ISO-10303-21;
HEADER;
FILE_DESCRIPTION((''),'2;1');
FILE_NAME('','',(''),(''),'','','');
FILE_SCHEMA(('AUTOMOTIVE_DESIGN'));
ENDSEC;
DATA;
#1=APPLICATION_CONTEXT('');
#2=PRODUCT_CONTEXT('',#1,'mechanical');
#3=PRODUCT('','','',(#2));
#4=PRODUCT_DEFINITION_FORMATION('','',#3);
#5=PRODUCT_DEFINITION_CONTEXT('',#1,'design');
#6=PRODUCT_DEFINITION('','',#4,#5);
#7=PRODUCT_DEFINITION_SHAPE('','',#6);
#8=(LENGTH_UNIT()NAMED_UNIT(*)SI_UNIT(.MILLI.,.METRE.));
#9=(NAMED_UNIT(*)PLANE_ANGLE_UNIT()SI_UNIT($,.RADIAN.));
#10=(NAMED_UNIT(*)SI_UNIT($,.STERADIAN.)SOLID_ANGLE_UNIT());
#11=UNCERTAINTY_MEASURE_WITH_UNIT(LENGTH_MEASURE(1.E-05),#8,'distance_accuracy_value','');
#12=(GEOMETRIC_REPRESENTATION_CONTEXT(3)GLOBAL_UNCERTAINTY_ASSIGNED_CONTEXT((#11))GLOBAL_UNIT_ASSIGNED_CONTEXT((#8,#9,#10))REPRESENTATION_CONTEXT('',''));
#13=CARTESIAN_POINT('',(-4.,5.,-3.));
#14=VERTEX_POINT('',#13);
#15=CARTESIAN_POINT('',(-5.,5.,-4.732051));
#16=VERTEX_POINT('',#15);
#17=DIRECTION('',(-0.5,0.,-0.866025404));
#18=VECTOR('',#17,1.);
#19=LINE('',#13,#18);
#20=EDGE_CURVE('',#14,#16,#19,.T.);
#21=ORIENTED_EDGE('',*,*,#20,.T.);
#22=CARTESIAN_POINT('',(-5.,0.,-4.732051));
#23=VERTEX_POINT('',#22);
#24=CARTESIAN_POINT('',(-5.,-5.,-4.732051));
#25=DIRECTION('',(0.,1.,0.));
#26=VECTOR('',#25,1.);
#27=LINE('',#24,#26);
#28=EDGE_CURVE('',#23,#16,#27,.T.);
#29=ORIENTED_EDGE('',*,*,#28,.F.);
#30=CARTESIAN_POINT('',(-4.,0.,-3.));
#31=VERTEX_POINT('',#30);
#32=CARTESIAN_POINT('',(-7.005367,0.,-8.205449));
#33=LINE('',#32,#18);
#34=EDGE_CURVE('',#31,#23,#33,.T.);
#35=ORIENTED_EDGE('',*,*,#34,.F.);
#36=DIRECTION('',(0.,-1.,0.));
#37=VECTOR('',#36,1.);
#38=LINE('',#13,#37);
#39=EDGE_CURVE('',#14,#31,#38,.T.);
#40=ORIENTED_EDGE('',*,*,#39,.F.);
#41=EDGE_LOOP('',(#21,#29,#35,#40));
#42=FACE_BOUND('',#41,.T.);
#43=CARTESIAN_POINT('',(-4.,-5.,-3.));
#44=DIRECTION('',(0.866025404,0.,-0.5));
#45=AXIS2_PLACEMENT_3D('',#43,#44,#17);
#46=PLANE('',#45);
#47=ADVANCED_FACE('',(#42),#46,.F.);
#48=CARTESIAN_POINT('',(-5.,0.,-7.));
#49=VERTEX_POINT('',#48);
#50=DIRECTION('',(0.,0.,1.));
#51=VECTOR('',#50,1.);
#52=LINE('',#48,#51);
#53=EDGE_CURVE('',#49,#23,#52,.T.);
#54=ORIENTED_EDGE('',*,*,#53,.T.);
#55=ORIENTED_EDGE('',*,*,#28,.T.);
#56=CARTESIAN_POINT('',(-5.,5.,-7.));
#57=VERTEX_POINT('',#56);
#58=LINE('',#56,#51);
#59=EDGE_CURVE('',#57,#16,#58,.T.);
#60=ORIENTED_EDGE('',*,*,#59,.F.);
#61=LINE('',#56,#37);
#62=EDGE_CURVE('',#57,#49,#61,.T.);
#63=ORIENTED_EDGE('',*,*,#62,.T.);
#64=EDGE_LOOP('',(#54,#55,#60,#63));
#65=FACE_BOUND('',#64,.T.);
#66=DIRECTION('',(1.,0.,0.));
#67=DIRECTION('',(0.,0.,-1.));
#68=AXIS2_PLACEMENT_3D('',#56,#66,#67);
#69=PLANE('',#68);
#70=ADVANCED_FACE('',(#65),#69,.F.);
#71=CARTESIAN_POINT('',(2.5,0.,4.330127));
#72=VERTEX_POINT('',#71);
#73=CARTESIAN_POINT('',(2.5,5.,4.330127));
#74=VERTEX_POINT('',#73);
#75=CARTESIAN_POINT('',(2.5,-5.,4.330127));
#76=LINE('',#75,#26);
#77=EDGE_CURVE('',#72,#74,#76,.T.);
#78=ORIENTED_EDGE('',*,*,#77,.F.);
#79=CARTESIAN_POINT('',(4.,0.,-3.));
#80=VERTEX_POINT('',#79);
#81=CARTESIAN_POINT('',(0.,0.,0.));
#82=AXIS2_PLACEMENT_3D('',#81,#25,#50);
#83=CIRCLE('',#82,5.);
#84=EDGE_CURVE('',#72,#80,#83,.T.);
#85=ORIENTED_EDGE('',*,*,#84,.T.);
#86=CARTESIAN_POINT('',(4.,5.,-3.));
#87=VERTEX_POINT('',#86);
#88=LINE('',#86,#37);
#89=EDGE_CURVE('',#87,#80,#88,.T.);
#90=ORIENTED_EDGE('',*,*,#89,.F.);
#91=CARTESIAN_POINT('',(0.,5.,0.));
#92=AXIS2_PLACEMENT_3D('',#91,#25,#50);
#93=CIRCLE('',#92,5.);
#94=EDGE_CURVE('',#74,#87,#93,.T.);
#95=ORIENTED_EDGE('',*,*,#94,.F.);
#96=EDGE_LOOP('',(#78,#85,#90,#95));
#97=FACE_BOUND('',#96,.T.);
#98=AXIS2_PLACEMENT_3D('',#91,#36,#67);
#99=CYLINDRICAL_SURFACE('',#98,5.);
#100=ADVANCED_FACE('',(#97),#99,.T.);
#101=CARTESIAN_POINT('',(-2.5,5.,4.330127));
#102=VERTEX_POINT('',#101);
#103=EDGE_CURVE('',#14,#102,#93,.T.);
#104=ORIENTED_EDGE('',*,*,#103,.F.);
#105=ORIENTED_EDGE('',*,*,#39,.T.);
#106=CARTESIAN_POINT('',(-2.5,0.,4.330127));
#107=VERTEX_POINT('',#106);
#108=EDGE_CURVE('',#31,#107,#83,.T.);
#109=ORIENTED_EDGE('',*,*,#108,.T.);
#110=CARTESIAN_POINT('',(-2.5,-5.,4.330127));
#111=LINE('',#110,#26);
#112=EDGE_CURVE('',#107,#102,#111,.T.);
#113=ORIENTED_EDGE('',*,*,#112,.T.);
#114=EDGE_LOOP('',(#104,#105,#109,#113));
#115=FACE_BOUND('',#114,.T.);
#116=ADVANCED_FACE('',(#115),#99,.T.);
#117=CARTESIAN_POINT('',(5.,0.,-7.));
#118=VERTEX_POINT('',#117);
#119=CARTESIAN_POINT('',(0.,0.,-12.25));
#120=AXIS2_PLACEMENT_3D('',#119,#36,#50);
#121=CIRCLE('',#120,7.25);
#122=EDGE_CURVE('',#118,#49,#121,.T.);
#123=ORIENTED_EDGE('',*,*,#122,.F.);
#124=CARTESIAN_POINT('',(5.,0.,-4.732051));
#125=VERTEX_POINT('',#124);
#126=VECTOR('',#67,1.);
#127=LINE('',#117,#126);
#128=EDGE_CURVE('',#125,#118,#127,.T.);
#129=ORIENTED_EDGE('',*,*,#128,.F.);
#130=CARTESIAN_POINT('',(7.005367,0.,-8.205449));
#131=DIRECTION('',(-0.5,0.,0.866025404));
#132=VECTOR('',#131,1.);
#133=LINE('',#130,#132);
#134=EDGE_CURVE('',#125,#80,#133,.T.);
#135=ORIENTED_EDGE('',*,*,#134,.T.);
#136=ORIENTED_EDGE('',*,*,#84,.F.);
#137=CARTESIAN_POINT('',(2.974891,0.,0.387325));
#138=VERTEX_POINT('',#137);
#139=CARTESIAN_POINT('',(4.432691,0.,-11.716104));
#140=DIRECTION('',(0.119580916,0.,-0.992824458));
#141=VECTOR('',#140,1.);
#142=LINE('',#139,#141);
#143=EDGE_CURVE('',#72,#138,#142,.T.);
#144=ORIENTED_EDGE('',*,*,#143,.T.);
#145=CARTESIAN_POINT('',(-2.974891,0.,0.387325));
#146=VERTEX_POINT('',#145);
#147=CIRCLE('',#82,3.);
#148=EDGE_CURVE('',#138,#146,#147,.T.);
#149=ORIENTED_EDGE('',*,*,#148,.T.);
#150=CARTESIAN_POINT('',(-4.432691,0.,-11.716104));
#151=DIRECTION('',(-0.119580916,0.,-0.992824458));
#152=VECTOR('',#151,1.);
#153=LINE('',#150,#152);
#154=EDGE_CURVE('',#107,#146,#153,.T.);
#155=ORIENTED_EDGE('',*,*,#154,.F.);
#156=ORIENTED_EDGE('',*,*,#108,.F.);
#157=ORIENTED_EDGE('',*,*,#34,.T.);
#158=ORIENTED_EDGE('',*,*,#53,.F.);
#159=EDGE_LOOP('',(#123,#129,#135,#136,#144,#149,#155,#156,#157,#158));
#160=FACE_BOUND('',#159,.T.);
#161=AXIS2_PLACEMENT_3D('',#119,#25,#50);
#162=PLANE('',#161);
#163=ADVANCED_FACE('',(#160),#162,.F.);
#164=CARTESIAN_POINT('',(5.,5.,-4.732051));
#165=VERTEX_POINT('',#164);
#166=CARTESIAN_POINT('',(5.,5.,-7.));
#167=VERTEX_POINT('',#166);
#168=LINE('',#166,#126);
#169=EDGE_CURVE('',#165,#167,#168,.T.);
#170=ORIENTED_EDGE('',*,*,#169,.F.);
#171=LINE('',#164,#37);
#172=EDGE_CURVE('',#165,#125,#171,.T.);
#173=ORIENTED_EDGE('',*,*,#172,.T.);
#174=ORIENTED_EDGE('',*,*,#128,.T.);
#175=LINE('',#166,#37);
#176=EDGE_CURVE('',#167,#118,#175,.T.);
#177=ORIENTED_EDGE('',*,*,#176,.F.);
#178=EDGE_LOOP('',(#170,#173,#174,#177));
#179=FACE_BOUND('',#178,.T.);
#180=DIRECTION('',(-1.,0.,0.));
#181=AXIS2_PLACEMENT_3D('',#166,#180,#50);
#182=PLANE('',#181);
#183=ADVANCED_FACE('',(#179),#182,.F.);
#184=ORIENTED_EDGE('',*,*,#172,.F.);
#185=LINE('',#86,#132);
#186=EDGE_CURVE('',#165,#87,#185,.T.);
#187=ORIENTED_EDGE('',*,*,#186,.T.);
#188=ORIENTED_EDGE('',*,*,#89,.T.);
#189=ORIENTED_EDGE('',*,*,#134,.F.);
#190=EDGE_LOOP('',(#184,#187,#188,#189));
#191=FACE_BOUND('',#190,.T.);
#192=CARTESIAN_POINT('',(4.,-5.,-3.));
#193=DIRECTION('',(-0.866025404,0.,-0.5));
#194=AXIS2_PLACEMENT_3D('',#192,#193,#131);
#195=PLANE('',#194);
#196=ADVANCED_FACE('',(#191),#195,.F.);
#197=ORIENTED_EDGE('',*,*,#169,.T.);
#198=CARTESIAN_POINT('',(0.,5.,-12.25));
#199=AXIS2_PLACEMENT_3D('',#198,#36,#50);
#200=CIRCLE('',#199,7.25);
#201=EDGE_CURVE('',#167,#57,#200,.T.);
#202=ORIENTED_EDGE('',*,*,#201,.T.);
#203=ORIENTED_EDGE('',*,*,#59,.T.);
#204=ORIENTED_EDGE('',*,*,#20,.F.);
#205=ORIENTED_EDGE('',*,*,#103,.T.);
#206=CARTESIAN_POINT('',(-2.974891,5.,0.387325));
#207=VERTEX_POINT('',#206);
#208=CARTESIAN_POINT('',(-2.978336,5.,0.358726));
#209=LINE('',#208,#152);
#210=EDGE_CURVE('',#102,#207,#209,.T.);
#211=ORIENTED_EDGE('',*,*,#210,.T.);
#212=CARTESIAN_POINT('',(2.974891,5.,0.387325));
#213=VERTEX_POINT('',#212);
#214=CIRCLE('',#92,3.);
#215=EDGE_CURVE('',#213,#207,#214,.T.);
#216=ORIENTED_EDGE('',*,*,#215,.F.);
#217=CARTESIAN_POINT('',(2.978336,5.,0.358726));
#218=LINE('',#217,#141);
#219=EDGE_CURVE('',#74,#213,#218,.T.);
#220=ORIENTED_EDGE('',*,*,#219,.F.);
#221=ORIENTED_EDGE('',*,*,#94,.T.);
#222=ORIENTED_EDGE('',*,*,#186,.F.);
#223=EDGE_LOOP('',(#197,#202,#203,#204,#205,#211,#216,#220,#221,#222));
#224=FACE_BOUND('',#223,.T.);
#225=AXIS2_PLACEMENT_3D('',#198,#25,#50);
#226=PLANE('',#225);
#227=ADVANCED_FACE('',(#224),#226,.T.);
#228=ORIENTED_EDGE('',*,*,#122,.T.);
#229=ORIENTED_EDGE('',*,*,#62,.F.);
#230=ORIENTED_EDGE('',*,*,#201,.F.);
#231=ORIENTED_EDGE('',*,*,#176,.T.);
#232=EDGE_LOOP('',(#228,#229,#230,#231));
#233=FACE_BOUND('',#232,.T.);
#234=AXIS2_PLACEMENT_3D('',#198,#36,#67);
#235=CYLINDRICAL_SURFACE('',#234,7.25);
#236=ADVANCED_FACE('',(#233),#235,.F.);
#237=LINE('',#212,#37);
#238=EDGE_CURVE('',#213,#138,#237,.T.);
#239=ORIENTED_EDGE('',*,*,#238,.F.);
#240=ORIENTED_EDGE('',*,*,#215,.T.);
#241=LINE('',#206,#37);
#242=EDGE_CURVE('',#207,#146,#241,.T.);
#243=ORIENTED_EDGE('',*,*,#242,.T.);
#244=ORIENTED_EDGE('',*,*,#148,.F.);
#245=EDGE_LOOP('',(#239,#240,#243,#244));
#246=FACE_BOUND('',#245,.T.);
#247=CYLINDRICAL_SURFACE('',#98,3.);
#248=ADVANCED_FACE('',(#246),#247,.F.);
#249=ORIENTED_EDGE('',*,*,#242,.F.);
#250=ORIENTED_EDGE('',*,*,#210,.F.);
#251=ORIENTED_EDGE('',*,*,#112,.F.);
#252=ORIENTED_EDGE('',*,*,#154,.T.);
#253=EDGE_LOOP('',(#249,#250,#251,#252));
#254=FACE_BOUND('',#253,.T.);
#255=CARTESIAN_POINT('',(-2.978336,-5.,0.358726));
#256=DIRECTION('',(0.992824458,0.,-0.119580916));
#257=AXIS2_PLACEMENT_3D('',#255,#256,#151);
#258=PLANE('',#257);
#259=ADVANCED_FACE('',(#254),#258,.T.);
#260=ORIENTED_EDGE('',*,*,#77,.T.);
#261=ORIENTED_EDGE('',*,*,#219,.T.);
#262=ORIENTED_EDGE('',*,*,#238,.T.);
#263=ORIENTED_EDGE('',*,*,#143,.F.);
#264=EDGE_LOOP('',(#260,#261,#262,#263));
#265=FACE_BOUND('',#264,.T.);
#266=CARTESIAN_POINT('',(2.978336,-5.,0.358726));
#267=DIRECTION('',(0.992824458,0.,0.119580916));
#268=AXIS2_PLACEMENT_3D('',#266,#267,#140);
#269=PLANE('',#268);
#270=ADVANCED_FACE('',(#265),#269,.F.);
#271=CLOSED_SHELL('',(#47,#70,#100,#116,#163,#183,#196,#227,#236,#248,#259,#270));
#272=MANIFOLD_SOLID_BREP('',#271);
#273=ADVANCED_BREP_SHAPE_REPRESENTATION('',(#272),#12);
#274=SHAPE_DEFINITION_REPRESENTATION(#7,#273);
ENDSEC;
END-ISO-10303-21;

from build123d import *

# Parameters (mm, degrees)
CROQUIS1_R              = 3
SALIENTE_EXTRUIR1_DEPTH = 5
CORTAR_EXTRUIR1_START   = -10
CORTAR_EXTRUIR1_DEPTH   = 10
CORTAR_EXTRUIR2_DEPTH   = 10


with BuildPart() as part:
    # Croquis1 → Saliente-Extruir1 (new body)
    with BuildSketch(Plane(origin=(0, 0, 0), x_dir=(1, 0, 0), z_dir=(0, 1, 0))):
        with BuildLine():
            Line((-5, 7), (-5, 3))
            Line((-5, 3), (-4, 3))
            ThreePointArc((-4, 3), (0, -5), (4, 3))
            Line((4, 3), (5, 3))
            Line((5, 3), (5, 7))
            ThreePointArc((5, 7), (0, 5), (-5, 7))
        make_face()
        Circle(CROQUIS1_R, mode=Mode.SUBTRACT)
    extrude(amount=SALIENTE_EXTRUIR1_DEPTH)

    # Croquis2 → Cortar-Extruir1 (cut)
    with BuildSketch(Plane(origin=(0, 5, 0), x_dir=(1, 0, 0), z_dir=(0, 1, 0)).offset(CORTAR_EXTRUIR1_START)):
        with BuildLine():
            ThreePointArc((-2.5, -4.330127019), (-1.294095226, -4.829629131), (0, -5))
            ThreePointArc((0, -5), (1.294095226, -4.829629131), (2.5, -4.330127019))
            Line((2.5, -4.330127019), (2.981780701, -0.330127019))
            ThreePointArc((2.981780701, -0.330127019), (2.995441712, -0.165314693), (3, 0))
            ThreePointArc((3, 0), (-0.165314693, 2.995441712), (-2.981780701, -0.330127019))
            Line((-2.981780701, -0.330127019), (-2.5, -4.330127019))
        make_face()
    extrude(amount=CORTAR_EXTRUIR1_DEPTH, mode=Mode.SUBTRACT)

    # Croquis3 → Cortar-Extruir2 (cut)
    with BuildSketch(Plane(origin=(0, 5, 0), x_dir=(1, 0, 0), z_dir=(0, 1, 0))):
        Polygon((4, 3), (5, 4.732050808), (5, 3), align=None)
        Polygon((-4, 3), (-5, 4.732050808), (-5, 3), align=None)
    extrude(amount=-CORTAR_EXTRUIR2_DEPTH, mode=Mode.SUBTRACT)


solid = part.part
